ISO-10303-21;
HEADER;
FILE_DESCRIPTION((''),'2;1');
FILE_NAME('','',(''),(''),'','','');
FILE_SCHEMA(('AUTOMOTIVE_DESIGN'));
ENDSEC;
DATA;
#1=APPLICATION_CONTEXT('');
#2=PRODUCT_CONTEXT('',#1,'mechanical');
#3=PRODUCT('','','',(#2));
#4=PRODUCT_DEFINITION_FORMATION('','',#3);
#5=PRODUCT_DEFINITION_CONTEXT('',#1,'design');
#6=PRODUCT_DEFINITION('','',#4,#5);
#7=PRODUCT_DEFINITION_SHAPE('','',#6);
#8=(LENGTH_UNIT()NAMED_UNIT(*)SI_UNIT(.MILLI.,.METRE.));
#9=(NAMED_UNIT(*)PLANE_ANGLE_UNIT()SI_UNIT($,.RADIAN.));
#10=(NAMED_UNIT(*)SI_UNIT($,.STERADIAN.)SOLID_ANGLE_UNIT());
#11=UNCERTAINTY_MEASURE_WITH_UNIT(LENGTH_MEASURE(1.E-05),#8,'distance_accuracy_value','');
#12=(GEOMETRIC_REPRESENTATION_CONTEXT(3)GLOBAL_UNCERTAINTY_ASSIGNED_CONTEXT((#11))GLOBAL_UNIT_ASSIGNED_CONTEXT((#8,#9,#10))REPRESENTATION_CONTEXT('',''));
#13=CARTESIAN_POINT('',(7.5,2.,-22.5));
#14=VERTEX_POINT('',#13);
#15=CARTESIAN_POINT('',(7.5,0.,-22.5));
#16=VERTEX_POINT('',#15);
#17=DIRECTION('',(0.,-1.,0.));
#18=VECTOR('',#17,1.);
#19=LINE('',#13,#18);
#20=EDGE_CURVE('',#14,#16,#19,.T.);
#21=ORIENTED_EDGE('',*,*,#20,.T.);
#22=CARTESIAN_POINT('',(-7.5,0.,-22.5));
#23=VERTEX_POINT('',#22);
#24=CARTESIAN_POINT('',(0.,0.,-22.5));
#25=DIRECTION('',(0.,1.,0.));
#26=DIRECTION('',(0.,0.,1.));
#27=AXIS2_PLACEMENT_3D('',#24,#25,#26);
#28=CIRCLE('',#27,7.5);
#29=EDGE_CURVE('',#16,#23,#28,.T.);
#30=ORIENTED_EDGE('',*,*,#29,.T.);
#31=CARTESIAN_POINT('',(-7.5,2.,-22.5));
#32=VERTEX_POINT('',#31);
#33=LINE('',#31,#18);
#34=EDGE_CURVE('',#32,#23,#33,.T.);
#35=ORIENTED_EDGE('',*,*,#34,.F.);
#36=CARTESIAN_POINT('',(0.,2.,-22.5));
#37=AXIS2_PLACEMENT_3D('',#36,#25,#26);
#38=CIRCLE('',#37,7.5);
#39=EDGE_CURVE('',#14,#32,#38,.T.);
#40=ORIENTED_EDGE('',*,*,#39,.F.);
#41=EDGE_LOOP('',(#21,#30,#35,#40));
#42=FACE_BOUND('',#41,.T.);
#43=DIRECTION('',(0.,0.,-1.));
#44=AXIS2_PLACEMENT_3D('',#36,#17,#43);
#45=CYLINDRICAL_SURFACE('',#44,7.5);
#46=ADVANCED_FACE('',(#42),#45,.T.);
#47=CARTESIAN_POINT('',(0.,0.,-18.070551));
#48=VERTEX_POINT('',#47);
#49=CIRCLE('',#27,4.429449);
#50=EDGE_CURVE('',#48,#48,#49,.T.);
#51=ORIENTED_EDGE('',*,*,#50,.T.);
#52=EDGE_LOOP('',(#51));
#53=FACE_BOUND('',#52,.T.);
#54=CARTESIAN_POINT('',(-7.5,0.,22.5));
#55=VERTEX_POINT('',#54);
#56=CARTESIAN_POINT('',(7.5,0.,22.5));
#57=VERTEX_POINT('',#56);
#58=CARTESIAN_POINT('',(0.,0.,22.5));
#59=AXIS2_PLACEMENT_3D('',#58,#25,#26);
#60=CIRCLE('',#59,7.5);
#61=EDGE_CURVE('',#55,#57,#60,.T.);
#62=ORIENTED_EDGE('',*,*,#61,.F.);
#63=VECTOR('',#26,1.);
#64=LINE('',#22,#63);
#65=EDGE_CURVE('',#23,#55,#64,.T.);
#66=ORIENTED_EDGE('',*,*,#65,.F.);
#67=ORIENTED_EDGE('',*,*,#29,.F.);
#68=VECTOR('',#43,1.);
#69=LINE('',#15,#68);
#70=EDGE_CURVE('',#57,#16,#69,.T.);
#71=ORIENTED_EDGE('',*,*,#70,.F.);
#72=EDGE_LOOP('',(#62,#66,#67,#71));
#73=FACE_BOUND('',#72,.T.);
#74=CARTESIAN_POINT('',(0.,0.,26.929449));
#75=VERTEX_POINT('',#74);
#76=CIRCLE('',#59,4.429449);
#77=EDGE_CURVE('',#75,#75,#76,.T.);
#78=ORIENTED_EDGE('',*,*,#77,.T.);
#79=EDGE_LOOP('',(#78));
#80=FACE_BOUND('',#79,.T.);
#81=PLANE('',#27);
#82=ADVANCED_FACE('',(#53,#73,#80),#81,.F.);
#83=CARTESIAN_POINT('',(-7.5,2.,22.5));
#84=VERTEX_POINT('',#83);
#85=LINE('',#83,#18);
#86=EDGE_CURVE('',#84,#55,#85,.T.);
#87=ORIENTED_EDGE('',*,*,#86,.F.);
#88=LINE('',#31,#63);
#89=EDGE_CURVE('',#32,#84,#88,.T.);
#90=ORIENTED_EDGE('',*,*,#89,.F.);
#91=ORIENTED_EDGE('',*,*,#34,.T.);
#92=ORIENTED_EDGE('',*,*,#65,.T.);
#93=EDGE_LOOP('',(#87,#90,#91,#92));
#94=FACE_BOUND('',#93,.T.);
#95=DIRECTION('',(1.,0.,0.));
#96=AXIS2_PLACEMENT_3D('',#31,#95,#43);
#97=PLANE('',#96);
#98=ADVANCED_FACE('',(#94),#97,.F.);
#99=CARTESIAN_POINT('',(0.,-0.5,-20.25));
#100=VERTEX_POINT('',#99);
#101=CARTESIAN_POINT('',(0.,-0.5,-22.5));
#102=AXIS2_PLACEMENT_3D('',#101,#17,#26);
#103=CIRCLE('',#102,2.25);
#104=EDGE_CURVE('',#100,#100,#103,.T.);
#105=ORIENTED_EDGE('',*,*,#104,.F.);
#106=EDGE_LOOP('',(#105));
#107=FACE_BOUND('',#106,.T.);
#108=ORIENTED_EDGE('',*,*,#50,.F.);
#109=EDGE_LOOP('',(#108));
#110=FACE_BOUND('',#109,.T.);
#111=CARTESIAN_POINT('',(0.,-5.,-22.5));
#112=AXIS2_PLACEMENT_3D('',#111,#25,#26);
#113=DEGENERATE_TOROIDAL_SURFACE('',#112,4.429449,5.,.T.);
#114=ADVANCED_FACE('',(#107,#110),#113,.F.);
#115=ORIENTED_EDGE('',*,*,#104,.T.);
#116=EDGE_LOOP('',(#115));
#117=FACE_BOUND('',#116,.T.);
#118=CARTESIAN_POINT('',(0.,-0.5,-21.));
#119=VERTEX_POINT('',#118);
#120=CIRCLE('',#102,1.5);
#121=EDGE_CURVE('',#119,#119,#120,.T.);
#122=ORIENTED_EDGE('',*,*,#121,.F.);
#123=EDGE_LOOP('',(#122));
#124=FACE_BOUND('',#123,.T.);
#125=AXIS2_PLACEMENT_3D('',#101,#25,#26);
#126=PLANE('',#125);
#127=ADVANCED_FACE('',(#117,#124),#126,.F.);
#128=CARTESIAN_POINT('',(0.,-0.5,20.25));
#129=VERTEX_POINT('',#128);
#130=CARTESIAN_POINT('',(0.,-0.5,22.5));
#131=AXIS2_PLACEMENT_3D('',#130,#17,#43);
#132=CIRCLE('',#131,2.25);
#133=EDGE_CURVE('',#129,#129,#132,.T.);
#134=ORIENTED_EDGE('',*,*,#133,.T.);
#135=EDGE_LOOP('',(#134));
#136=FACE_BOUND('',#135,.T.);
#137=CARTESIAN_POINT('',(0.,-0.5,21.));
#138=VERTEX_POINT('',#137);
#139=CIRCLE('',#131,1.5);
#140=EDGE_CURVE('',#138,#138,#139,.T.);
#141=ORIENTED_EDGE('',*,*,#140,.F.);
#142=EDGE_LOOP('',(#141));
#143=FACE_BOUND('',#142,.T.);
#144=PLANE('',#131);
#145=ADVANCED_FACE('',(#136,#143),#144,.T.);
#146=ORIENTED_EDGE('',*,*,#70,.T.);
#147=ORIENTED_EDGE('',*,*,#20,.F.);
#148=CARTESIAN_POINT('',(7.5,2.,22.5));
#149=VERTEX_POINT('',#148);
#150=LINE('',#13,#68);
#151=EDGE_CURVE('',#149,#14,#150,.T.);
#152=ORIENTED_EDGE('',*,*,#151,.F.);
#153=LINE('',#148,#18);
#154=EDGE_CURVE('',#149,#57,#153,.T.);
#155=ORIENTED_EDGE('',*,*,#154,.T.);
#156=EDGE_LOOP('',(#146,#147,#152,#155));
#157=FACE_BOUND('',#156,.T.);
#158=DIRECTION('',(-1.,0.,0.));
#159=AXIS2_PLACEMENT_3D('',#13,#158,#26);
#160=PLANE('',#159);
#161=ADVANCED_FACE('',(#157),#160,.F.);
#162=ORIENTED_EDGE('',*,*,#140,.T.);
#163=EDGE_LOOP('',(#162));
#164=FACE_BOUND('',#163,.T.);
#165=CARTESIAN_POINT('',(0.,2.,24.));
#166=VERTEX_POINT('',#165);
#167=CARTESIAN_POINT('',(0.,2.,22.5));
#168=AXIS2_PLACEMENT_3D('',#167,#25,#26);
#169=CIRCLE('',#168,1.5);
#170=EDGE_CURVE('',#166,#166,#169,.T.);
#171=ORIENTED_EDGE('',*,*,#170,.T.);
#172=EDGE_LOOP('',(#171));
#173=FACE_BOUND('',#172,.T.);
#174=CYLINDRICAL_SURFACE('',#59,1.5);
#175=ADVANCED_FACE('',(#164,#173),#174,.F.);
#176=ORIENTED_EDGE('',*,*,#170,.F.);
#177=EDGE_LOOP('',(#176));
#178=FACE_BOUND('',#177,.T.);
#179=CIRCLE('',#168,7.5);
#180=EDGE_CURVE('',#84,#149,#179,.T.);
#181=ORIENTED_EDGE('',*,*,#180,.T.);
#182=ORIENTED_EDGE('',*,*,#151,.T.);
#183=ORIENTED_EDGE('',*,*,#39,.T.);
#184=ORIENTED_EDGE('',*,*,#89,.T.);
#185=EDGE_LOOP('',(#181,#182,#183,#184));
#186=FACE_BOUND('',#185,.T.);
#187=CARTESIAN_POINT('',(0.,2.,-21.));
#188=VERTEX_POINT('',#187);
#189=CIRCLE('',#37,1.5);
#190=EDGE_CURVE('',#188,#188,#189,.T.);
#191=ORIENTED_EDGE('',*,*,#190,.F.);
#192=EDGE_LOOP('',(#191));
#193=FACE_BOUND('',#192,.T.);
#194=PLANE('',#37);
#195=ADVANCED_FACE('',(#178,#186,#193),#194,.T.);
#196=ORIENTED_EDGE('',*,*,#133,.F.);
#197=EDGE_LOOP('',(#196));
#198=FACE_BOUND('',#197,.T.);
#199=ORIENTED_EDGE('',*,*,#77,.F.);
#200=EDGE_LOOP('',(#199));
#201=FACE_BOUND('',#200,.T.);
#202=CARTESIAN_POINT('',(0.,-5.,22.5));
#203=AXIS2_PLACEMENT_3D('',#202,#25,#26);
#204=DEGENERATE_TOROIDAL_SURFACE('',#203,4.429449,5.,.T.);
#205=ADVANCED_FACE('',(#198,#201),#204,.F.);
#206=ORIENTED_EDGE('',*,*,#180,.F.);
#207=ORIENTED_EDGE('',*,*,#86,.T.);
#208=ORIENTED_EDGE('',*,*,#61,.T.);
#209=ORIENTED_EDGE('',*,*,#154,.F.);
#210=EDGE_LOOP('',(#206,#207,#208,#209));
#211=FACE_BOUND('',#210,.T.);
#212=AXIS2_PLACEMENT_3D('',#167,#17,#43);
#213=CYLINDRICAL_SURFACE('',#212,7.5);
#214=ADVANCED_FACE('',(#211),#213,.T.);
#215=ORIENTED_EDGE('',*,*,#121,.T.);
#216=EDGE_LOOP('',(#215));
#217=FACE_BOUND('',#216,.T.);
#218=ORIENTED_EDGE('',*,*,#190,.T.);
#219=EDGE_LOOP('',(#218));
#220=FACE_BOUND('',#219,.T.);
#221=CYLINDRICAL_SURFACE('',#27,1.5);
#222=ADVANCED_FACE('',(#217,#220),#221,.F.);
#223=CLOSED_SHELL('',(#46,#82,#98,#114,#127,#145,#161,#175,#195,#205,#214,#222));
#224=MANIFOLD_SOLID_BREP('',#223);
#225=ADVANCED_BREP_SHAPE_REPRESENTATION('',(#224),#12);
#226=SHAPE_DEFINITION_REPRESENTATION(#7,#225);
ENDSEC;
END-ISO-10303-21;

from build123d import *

# Parameters (mm, degrees)
BOSS_EXTRUDE1_DEPTH = 2
SKETCH2_R           = 1.5
CUT_EXTRUDE1_DEPTH  = 31.987900865
SKETCH3_R           = 2.25
SKETCH3_R_2         = 1.5
BOSS_EXTRUDE2_DEPTH = 0.5
FILLET1_R           = 5


with BuildPart() as part:
    # Sketch1 → Boss-Extrude1 (new body)
    with BuildSketch(Plane(origin=(0, 0, 0), x_dir=(1, 0, 0), z_dir=(0, 1, 0))):
        with BuildLine():
            Line((7.5, 22.5), (7.5, -22.5))
            ThreePointArc((7.5, -22.5), (0, -30), (-7.5, -22.5))
            Line((-7.5, -22.5), (-7.5, 22.5))
            ThreePointArc((-7.5, 22.5), (0, 30), (7.5, 22.5))
        make_face()
    extrude(amount=BOSS_EXTRUDE1_DEPTH)

    # Sketch2 → Cut-Extrude1 (cut, through all)
    with BuildSketch(Plane(origin=(0, 2, 0), x_dir=(1, 0, 0), z_dir=(0, 1, 0))):
        with Locations(Location((0, 22.5, 0), (0, 0, 270))):
            Circle(SKETCH2_R)
        with Locations(Location((0, -22.5, 0), (0, 0, 270))):
            Circle(SKETCH2_R)
    extrude(amount=-CUT_EXTRUDE1_DEPTH, mode=Mode.SUBTRACT)

    # Sketch3 → Boss-Extrude2 (add)
    # profile 1 of 2: a face of its own
    with BuildSketch(Plane.XZ):
        with Locations(Location((0, 22.5, 0), (0, 0, 90))):
            Circle(SKETCH3_R)
        with Locations(Location((0, 22.5, 0), (0, 0, 90))):
            Circle(SKETCH3_R_2, mode=Mode.SUBTRACT)
    # profile 2 of 2: a face of its own
    with BuildSketch(Plane.XZ):
        with Locations(Location((0, -22.5, 0), (0, 0, 90))):
            Circle(SKETCH3_R)
        with Locations(Location((0, -22.5, 0), (0, 0, 90))):
            Circle(SKETCH3_R_2, mode=Mode.SUBTRACT)
    extrude(amount=BOSS_EXTRUDE2_DEPTH)

    # Fillet1
    # the kernel refuses this fillet: 5 mm, written as the material it adds along each edge
    with BuildSketch(Plane(origin=(0, 0, 22.5), x_dir=(0, 0, 1), z_dir=(1, 0, 0))) as fillet1_piece_1:
        with BuildLine():
            CenterArc((4.429449472, 5), FILLET1_R, 244.158067237, 25.841932763)
            Line((2.25, 0.5), (2.206411011, 0.41))
            ThreePointArc((2.206411011, 0.41), (2.15, 0.25), (2.15, 0))
            Line((2.15, 0), (2.25, -0.1))
            Line((2.25, -0.1), (4.429449472, -0.1))
            Line((4.429449472, -0.1), (4.429449472, 0))
        make_face()
    revolve(axis=Axis((0, 0, 22.5), (0, -1, 0)))
    with BuildSketch(Plane(origin=(0, 0, -22.5), x_dir=(0, 0, 1), z_dir=(1, 0, 0))) as fillet1_piece_2:
        with BuildLine():
            CenterArc((4.429449472, 5), FILLET1_R, 244.158067237, 25.841932763)
            Line((2.25, 0.5), (2.206411011, 0.41))
            ThreePointArc((2.206411011, 0.41), (2.15, 0.25), (2.15, 0))
            Line((2.15, 0), (2.25, -0.1))
            Line((2.25, -0.1), (4.429449472, -0.1))
            Line((4.429449472, -0.1), (4.429449472, 0))
        make_face()
    revolve(axis=Axis((0, 0, -22.5), (0, -1, 0)))


solid = part.part
